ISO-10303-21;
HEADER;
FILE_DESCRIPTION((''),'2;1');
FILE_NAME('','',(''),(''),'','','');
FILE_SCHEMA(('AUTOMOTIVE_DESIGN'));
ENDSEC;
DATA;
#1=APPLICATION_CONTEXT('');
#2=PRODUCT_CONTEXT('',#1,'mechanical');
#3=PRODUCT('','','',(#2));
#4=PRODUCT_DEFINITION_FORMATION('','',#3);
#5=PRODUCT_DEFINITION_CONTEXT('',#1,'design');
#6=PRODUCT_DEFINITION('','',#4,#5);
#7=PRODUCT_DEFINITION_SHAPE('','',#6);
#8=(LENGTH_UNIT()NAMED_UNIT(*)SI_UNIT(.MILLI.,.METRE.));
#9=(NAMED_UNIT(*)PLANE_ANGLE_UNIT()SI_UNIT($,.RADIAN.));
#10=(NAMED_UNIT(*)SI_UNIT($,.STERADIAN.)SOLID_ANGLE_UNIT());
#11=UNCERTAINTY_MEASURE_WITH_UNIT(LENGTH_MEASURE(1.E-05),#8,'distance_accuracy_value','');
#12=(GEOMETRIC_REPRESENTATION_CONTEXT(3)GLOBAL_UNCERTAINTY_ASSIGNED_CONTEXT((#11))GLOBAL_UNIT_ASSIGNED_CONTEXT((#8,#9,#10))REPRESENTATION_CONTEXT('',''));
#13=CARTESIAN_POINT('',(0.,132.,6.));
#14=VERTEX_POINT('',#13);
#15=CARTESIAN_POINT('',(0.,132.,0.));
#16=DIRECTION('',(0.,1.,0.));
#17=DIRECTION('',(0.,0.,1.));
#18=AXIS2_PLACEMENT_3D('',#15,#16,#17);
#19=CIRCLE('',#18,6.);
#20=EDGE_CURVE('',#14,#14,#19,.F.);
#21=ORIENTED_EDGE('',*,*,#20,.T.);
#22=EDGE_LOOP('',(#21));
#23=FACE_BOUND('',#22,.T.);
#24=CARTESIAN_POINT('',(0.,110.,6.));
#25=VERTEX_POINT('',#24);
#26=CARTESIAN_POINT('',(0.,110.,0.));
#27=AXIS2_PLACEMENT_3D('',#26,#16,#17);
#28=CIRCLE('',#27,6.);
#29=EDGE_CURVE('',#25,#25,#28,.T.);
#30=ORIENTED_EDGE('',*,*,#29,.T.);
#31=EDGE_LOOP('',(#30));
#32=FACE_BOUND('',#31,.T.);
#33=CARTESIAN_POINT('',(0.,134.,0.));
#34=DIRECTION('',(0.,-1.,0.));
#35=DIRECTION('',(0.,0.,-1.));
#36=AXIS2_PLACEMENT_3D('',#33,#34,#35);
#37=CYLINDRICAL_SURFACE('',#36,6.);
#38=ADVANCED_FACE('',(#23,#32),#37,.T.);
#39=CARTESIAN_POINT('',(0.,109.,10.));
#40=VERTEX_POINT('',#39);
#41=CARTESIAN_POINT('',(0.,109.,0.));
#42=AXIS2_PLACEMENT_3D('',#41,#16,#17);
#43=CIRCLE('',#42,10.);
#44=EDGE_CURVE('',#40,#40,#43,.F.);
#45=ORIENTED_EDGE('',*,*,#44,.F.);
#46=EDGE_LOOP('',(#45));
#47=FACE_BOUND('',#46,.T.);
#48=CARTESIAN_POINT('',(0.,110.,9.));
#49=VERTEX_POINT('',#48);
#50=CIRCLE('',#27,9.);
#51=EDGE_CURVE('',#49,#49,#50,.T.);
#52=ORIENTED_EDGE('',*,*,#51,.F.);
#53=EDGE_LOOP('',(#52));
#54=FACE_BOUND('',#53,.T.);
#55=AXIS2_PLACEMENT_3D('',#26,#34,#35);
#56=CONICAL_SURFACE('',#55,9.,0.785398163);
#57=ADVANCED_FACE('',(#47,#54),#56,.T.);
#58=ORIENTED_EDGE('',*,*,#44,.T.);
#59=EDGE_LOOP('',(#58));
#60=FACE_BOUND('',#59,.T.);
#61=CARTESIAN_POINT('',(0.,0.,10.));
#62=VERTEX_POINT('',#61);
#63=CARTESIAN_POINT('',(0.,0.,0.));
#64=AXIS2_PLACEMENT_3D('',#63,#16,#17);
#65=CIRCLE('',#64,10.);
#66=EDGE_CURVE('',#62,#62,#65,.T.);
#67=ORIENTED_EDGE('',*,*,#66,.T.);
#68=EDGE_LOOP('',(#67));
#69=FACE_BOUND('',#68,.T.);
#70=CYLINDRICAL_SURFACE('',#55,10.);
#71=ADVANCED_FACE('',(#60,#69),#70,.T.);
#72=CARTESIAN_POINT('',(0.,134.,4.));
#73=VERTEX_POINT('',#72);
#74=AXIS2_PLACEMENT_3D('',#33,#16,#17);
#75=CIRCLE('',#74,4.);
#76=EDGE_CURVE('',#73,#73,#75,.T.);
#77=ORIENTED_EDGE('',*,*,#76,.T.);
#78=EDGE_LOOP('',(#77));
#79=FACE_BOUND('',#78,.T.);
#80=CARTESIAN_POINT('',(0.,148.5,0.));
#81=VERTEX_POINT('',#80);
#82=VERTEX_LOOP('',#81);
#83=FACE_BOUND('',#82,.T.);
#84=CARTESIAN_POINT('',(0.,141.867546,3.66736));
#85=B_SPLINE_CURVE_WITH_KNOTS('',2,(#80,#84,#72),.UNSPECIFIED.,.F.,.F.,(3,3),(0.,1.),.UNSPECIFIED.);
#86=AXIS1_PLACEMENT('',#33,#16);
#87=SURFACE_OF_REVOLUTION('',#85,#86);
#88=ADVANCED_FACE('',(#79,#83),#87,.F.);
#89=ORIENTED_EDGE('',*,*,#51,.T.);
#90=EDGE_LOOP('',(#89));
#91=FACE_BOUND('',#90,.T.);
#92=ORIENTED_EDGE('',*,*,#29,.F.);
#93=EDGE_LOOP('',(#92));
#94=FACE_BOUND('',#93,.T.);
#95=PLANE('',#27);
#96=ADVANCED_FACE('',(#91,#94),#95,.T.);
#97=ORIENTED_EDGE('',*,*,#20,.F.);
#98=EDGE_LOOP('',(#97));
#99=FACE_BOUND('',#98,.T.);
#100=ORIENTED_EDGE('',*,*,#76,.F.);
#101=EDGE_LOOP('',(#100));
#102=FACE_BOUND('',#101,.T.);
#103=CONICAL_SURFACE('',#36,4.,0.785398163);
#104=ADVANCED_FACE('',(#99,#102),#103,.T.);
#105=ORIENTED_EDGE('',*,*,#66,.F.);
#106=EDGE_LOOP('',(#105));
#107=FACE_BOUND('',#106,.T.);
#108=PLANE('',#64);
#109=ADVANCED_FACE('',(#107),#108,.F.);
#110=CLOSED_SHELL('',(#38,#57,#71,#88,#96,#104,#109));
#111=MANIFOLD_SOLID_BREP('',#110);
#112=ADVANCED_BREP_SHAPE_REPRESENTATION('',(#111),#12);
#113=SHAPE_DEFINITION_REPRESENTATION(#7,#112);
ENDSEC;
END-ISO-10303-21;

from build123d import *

# Parameters (mm, degrees)
SKETCH1_R           = 10
BOSS_EXTRUDE1_DEPTH = 110
SKETCH2_R           = 6
BOSS_EXTRUDE2_DEPTH = 24
CHAMFER1_SIZE       = 2
CHAMFER2_SIZE       = 1


with BuildPart() as part:
    # Sketch1 → Boss-Extrude1 (new body)
    with BuildSketch(Plane(origin=(0, 0, 0), x_dir=(1, 0, 0), z_dir=(0, 1, 0))):
        with Locations(Location((0, 0, 0), (0, 0, 270))):
            Circle(SKETCH1_R)
    extrude(amount=BOSS_EXTRUDE1_DEPTH)

    # Sketch2 → Boss-Extrude2 (add)
    with BuildSketch(Plane(origin=(0, 110, 0), x_dir=(1, 0, 0), z_dir=(0, 1, 0))):
        with Locations(Location((0, 0, 0), (0, 0, 270))):
            Circle(SKETCH2_R)
    extrude(amount=BOSS_EXTRUDE2_DEPTH)

    # Sketch3 → Revolve1 (revolve)
    with BuildSketch(Plane(origin=(0, 0, 0), x_dir=(0, 0, -1), z_dir=(1, 0, 0))):
        with BuildLine():
            Line((0, 134), (0, 148.5))
            add(Edge.make_bspline(
                [(0, 148.5), (-3.667360113, 141.867546182), (-4, 134)],
                knots=[0, 0, 0, 1, 1, 1], degree=2))
            Line((-4, 134), (0, 134))
        make_face()
    revolve(axis=Axis((0, 134, 0), (0, -1, 0)))

    # Chamfer1
    chamfer1_edges = [part.edges().sort_by_distance(p)[0] for p in [
        (0, 134, -6),
    ]]
    chamfer(chamfer1_edges, length=CHAMFER1_SIZE - 0.0001)  # a hair under: the kernel refuses the full size

    # Chamfer2
    chamfer2_edges = [part.edges().sort_by_distance(p)[0] for p in [
        (0, 110, -10),
    ]]
    chamfer(chamfer2_edges, length=CHAMFER2_SIZE)


solid = part.part
